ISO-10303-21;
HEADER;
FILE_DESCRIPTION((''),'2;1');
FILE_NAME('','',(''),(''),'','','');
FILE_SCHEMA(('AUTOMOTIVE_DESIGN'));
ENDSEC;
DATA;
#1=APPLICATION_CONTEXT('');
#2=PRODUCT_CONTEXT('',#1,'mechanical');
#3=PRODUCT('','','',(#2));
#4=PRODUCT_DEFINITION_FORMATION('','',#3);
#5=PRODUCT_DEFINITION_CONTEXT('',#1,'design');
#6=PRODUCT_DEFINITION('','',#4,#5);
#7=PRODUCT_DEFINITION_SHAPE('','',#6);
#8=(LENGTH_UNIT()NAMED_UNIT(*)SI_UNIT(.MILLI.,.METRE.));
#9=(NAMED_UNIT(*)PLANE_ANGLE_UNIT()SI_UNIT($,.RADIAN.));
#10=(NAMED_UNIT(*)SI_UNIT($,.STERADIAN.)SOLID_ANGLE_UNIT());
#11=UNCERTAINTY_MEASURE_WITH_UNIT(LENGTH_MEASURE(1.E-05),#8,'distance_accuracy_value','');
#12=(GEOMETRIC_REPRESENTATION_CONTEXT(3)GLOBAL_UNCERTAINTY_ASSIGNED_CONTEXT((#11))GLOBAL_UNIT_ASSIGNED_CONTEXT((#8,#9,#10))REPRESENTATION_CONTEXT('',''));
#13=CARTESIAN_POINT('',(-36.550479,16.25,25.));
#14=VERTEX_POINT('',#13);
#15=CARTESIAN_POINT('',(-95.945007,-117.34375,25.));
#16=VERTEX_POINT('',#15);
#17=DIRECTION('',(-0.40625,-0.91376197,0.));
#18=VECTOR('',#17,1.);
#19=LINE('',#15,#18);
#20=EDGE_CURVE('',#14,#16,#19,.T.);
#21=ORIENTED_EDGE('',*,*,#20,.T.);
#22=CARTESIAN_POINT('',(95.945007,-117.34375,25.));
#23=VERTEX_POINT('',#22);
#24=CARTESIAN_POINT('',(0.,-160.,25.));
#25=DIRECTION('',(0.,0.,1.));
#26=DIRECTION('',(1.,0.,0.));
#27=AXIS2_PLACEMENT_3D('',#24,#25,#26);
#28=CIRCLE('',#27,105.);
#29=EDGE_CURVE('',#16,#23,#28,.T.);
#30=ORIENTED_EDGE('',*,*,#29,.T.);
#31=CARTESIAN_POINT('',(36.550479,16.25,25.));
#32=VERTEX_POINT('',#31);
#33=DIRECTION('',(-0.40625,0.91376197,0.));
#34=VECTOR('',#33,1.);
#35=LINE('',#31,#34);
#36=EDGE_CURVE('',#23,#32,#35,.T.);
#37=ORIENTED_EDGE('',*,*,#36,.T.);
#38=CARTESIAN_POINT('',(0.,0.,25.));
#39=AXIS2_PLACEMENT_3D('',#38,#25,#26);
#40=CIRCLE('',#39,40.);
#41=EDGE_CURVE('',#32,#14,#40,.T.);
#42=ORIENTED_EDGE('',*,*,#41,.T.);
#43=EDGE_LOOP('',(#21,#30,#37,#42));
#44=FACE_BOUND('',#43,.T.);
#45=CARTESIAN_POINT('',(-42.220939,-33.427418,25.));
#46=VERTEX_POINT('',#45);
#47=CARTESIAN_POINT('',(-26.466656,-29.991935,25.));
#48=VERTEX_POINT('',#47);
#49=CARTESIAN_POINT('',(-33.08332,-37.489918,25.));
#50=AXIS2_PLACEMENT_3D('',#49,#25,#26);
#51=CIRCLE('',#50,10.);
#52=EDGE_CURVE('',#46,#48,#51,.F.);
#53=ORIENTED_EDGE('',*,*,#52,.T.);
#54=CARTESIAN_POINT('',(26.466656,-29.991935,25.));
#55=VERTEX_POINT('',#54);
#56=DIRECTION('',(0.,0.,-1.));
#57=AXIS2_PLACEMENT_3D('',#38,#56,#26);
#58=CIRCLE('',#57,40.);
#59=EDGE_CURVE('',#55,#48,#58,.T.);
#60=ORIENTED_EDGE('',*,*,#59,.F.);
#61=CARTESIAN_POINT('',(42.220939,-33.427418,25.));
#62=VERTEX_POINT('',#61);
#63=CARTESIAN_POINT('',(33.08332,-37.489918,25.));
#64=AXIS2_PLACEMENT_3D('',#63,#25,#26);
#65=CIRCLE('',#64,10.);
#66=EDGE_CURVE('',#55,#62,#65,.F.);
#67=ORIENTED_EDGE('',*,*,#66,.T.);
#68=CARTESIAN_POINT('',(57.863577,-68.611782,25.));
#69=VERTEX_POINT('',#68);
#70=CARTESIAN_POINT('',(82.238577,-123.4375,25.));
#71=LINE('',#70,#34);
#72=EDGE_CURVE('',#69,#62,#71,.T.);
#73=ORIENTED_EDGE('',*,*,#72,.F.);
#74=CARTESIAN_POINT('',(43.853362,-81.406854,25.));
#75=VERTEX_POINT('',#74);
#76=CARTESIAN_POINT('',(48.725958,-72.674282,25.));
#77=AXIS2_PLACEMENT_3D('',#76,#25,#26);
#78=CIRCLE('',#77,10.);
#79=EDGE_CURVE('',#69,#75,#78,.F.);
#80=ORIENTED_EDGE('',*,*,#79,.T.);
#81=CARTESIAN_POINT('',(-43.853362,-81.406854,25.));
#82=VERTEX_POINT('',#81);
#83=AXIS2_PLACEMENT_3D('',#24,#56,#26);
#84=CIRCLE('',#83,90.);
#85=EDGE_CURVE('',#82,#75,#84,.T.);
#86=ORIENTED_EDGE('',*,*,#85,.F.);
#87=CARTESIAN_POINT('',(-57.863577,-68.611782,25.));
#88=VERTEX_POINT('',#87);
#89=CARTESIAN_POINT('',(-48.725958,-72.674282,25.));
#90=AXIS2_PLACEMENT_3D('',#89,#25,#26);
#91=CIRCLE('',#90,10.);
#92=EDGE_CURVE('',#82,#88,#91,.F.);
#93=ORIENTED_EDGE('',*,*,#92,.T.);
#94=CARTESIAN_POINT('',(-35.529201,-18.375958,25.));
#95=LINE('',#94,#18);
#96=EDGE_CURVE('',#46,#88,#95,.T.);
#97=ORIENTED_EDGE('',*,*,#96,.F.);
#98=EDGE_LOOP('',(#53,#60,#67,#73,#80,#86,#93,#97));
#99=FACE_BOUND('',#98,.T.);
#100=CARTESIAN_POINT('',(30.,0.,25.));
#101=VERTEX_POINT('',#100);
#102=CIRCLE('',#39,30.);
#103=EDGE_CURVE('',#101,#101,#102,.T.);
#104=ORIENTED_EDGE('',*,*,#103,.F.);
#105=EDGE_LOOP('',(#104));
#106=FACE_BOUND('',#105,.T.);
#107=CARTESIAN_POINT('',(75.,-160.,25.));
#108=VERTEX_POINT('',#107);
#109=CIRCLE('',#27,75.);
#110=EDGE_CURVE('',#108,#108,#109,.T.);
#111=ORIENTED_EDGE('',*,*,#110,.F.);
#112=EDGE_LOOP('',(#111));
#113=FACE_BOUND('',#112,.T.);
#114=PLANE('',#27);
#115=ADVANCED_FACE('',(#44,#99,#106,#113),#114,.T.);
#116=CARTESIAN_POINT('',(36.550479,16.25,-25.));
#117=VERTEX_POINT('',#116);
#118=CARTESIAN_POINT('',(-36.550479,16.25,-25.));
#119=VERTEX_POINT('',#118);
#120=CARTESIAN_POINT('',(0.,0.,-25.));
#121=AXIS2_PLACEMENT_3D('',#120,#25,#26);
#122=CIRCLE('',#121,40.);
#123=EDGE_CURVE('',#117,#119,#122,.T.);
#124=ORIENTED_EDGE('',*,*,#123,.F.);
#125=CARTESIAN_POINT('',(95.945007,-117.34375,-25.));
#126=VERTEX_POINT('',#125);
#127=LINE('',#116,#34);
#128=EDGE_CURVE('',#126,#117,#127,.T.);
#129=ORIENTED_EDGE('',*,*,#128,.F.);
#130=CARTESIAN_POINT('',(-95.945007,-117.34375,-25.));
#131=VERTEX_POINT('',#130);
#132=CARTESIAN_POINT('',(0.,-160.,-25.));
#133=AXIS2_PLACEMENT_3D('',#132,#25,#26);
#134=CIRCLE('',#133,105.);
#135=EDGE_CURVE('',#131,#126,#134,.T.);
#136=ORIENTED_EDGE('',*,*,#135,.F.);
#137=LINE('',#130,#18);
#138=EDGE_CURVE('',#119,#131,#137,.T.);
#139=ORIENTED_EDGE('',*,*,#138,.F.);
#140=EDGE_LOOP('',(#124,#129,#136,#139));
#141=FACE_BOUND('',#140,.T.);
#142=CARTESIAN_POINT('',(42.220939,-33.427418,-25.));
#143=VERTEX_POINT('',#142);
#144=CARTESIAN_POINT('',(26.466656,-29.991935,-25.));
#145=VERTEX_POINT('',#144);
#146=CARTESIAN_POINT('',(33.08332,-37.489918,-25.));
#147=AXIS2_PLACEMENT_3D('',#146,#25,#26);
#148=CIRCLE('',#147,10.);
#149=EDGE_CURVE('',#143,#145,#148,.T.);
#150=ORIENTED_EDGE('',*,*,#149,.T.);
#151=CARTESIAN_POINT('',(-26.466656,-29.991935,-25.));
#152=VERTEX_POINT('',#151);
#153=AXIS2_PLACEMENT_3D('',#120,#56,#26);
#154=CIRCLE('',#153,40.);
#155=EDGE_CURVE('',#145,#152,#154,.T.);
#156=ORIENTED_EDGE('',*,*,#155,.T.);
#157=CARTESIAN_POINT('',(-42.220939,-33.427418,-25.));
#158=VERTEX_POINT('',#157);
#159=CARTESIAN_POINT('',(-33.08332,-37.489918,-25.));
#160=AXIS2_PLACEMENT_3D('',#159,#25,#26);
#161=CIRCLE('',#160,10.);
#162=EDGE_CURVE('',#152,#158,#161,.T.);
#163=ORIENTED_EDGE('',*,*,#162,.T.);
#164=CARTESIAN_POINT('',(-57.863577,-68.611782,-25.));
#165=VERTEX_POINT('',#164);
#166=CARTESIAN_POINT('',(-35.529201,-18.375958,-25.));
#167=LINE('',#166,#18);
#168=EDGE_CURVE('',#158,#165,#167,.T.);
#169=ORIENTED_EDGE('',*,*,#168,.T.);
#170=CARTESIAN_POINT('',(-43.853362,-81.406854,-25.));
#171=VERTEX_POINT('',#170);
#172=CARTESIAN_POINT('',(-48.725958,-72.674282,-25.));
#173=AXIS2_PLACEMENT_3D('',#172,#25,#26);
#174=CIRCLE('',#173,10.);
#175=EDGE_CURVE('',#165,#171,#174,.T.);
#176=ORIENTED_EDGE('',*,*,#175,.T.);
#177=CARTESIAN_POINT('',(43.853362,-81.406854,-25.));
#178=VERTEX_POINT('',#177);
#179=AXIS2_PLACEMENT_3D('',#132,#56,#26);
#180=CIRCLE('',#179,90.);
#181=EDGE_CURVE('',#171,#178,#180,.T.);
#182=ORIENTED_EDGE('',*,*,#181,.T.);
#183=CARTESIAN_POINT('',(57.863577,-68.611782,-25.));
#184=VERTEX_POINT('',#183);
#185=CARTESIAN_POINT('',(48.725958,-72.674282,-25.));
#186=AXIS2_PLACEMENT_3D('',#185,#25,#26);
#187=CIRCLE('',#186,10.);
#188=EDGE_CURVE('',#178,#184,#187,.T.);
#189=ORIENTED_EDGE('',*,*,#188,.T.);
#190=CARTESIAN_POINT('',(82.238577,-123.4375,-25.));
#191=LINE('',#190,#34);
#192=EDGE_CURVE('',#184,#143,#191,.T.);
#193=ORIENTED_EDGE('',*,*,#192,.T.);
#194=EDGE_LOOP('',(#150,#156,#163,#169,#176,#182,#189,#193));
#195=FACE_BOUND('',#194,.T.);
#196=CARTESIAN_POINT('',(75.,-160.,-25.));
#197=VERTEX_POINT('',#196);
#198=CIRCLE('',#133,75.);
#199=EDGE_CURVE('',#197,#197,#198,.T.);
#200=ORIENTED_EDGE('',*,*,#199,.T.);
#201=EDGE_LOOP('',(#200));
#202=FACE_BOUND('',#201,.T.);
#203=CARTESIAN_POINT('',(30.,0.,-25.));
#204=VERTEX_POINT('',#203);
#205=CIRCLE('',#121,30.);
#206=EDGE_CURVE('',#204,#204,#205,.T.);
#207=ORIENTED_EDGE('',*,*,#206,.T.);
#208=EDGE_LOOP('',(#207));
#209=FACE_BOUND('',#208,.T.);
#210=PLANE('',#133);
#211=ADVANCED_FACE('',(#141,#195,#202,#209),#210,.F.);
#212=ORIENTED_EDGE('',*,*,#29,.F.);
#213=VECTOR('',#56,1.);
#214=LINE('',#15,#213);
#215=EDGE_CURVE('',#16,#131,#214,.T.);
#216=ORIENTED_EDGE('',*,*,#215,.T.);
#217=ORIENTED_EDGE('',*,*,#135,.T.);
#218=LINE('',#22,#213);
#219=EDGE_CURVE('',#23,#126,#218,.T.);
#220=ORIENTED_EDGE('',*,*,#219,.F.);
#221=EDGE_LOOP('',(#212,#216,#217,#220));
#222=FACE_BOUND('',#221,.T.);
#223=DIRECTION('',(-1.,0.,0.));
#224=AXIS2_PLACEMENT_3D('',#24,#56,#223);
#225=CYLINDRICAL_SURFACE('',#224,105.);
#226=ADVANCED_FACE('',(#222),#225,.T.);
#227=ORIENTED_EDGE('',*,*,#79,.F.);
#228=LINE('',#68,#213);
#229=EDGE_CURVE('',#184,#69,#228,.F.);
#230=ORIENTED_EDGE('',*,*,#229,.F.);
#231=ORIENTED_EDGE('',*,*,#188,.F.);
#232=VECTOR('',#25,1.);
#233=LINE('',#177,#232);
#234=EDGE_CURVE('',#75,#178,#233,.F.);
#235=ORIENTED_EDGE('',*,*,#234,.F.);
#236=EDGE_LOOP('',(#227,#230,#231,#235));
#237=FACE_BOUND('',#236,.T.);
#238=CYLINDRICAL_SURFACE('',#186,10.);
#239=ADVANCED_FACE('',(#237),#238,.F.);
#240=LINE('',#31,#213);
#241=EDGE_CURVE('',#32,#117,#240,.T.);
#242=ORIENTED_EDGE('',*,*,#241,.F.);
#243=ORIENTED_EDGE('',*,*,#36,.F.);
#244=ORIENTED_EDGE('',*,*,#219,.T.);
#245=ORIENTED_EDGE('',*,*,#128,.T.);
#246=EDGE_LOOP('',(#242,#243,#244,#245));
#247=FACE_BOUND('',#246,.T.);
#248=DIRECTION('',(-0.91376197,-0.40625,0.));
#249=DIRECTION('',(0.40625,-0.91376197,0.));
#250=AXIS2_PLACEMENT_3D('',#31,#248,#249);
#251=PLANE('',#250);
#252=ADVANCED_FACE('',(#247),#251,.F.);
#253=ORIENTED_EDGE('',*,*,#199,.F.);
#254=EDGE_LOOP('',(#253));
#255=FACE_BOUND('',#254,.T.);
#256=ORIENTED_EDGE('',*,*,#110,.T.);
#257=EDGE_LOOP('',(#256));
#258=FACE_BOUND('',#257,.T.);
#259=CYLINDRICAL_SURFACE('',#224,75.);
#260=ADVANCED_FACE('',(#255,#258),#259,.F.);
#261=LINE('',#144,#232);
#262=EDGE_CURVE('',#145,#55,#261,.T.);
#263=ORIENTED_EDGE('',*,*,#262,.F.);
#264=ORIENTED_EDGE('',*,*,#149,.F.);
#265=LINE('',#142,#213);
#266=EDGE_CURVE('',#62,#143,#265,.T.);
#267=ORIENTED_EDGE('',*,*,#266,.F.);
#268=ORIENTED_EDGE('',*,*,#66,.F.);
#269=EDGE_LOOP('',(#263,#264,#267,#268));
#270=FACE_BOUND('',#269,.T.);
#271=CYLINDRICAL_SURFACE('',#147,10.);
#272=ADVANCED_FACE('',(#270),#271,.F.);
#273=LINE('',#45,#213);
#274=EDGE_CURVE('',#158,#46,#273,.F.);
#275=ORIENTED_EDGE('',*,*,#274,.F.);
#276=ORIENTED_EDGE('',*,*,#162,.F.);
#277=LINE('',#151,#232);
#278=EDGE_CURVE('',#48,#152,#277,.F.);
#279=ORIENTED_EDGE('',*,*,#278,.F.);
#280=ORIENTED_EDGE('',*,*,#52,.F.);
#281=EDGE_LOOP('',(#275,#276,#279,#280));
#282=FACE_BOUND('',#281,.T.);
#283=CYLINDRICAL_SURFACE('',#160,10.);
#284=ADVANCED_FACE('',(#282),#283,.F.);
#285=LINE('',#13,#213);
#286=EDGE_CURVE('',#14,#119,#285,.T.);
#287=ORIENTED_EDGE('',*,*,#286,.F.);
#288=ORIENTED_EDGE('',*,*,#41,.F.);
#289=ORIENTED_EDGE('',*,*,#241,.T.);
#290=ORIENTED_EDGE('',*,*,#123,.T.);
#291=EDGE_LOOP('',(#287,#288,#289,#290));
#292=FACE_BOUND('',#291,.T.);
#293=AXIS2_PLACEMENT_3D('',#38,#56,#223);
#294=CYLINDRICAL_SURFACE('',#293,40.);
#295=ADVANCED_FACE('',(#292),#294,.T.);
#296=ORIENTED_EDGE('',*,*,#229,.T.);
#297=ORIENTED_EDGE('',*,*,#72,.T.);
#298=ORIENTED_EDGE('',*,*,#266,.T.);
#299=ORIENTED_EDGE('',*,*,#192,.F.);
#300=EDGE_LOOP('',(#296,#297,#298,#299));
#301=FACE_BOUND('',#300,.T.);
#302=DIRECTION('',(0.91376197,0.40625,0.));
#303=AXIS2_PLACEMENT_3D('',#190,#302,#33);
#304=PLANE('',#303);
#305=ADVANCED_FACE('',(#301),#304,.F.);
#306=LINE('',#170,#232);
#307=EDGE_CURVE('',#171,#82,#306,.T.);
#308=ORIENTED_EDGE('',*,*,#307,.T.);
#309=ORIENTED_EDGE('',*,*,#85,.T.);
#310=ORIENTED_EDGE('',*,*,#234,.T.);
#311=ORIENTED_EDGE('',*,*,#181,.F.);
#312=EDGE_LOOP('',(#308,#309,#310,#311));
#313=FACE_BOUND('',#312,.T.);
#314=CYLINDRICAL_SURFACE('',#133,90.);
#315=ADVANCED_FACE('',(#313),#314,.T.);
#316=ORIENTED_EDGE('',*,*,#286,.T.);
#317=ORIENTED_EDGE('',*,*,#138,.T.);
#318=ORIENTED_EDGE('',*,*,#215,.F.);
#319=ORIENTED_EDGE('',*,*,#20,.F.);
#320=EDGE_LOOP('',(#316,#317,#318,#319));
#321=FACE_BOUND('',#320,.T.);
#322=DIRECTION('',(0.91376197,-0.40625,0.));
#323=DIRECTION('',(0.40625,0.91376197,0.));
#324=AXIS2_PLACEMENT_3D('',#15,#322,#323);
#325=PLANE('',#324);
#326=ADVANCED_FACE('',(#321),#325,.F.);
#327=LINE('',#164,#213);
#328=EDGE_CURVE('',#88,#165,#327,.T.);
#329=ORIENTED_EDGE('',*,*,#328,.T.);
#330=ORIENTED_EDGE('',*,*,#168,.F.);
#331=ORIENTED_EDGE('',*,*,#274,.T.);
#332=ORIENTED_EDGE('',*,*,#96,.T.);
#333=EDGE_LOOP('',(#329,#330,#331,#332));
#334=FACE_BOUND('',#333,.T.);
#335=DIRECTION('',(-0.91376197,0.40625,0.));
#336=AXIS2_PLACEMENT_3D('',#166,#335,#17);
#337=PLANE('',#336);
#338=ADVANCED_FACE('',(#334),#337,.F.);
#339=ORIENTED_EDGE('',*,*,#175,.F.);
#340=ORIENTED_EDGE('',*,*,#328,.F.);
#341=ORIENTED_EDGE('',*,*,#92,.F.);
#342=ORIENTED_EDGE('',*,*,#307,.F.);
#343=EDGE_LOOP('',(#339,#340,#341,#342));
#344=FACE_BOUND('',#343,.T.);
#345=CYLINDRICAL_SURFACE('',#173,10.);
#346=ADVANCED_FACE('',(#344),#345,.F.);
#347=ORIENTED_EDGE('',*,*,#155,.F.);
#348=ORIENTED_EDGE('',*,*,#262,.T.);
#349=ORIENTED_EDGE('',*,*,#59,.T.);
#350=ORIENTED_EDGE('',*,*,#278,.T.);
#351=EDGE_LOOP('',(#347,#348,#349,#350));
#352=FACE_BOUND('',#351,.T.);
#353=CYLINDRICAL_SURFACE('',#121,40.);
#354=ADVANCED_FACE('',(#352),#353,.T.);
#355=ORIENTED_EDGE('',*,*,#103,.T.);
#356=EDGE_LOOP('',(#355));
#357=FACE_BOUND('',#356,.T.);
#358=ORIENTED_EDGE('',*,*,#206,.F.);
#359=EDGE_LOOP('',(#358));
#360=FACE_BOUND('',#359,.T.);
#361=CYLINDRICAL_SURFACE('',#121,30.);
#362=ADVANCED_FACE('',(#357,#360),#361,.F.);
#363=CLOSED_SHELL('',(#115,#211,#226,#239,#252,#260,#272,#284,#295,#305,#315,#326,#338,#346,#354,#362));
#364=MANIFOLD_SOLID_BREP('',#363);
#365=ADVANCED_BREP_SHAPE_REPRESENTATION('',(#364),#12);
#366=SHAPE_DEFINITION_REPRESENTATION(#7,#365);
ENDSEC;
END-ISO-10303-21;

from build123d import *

# Parameters (mm, degrees)
SKETCH1_R               = 75
BOSS_EXTRUDE1_DEPTH     = 25
CUT_EXTRUDE1_DEPTH      = 287.138078556
CUT_EXTRUDE1_DEPTH_BACK = 287.138078556
FILLET1_START           = -25
FILLET1_DEPTH           = 50
SKETCH3_R               = 30
CUT_EXTRUDE2_DEPTH      = 290.39592257


with BuildPart() as part:
    # Sketch1 → Boss-Extrude1 (new, symmetric)
    with BuildSketch(Plane.XY):
        with BuildLine():
            Line((-95.945006832, -117.34375), (-36.550478793, 16.25))
            ThreePointArc((-36.550478793, 16.25), (0, 40), (36.550478793, 16.25))
            Line((36.550478793, 16.25), (95.945006832, -117.34375))
            ThreePointArc((95.945006832, -117.34375), (0, -265), (-95.945006832, -117.34375))
        make_face()
        with Locations((0, -160)):
            Circle(SKETCH1_R, mode=Mode.SUBTRACT)
    extrude(amount=BOSS_EXTRUDE1_DEPTH, both=True)

    # Sketch2 → Cut-Extrude1 (cut, two sides: drawn at the far end of the back side and taken through both)
    with BuildSketch(Plane.XY.offset(-CUT_EXTRUDE1_DEPTH_BACK)):
        with BuildLine():
            Line((-35.52920143, -18.375958363), (-82.238577284, -123.4375))
            ThreePointArc((-82.238577284, -123.4375), (0, -70), (82.238577284, -123.4375))
            Line((82.238577284, -123.4375), (35.52920143, -18.375958363))
            ThreePointArc((35.52920143, -18.375958363), (0, -40), (-35.52920143, -18.375958363))
        make_face()
    extrude(amount=CUT_EXTRUDE1_DEPTH + CUT_EXTRUDE1_DEPTH_BACK, mode=Mode.SUBTRACT)

    # Fillet1: read off the stored shape, not the designer's step
    # Fillet1 outline → Fillet1 (add)
    with BuildSketch(Plane.XY.offset(FILLET1_START)):
        with BuildLine():
            ThreePointArc((-42.220939274, -33.427418189), (-35.213916082, -27.719526256), (-26.466655661, -29.991934551))
            ThreePointArc((-26.466655661, -29.991934551), (-31.537347698, -24.604790188), (-35.52920143, -18.375958363))
            Line((-35.52920143, -18.375958363), (-42.220939274, -33.427418189))
        make_face()
        with BuildLine():
            ThreePointArc((35.52920143, -18.375958363), (31.537347698, -24.604790188), (26.466655661, -29.991934551))
            ThreePointArc((26.466655661, -29.991934551), (35.213916082, -27.719526256), (42.220939274, -33.427418189))
            Line((42.220939274, -33.427418189), (35.52920143, -18.375958363))
        make_face()
        with BuildLine():
            ThreePointArc((-43.853361827, -81.406853629), (-55.469552548, -80.058313703), (-57.863577284, -68.61178181))
            Line((-57.863577284, -68.61178181), (-82.238577284, -123.4375))
            ThreePointArc((-82.238577284, -123.4375), (-66.45628703, -99.30764534), (-43.853361827, -81.406853629))
        make_face()
        with BuildLine():
            Line((82.238577284, -123.4375), (57.863577284, -68.61178181))
            ThreePointArc((57.863577284, -68.61178181), (55.469552548, -80.058313703), (43.853361827, -81.406853629))
            ThreePointArc((43.853361827, -81.406853629), (66.45628703, -99.30764534), (82.238577284, -123.4375))
        make_face()
    extrude(amount=FILLET1_DEPTH)

    # Sketch3 → Cut-Extrude2 (cut, through all)
    with BuildSketch(Plane.XY.offset(25)):
        Circle(SKETCH3_R)
    extrude(amount=-CUT_EXTRUDE2_DEPTH, mode=Mode.SUBTRACT)


solid = part.part
